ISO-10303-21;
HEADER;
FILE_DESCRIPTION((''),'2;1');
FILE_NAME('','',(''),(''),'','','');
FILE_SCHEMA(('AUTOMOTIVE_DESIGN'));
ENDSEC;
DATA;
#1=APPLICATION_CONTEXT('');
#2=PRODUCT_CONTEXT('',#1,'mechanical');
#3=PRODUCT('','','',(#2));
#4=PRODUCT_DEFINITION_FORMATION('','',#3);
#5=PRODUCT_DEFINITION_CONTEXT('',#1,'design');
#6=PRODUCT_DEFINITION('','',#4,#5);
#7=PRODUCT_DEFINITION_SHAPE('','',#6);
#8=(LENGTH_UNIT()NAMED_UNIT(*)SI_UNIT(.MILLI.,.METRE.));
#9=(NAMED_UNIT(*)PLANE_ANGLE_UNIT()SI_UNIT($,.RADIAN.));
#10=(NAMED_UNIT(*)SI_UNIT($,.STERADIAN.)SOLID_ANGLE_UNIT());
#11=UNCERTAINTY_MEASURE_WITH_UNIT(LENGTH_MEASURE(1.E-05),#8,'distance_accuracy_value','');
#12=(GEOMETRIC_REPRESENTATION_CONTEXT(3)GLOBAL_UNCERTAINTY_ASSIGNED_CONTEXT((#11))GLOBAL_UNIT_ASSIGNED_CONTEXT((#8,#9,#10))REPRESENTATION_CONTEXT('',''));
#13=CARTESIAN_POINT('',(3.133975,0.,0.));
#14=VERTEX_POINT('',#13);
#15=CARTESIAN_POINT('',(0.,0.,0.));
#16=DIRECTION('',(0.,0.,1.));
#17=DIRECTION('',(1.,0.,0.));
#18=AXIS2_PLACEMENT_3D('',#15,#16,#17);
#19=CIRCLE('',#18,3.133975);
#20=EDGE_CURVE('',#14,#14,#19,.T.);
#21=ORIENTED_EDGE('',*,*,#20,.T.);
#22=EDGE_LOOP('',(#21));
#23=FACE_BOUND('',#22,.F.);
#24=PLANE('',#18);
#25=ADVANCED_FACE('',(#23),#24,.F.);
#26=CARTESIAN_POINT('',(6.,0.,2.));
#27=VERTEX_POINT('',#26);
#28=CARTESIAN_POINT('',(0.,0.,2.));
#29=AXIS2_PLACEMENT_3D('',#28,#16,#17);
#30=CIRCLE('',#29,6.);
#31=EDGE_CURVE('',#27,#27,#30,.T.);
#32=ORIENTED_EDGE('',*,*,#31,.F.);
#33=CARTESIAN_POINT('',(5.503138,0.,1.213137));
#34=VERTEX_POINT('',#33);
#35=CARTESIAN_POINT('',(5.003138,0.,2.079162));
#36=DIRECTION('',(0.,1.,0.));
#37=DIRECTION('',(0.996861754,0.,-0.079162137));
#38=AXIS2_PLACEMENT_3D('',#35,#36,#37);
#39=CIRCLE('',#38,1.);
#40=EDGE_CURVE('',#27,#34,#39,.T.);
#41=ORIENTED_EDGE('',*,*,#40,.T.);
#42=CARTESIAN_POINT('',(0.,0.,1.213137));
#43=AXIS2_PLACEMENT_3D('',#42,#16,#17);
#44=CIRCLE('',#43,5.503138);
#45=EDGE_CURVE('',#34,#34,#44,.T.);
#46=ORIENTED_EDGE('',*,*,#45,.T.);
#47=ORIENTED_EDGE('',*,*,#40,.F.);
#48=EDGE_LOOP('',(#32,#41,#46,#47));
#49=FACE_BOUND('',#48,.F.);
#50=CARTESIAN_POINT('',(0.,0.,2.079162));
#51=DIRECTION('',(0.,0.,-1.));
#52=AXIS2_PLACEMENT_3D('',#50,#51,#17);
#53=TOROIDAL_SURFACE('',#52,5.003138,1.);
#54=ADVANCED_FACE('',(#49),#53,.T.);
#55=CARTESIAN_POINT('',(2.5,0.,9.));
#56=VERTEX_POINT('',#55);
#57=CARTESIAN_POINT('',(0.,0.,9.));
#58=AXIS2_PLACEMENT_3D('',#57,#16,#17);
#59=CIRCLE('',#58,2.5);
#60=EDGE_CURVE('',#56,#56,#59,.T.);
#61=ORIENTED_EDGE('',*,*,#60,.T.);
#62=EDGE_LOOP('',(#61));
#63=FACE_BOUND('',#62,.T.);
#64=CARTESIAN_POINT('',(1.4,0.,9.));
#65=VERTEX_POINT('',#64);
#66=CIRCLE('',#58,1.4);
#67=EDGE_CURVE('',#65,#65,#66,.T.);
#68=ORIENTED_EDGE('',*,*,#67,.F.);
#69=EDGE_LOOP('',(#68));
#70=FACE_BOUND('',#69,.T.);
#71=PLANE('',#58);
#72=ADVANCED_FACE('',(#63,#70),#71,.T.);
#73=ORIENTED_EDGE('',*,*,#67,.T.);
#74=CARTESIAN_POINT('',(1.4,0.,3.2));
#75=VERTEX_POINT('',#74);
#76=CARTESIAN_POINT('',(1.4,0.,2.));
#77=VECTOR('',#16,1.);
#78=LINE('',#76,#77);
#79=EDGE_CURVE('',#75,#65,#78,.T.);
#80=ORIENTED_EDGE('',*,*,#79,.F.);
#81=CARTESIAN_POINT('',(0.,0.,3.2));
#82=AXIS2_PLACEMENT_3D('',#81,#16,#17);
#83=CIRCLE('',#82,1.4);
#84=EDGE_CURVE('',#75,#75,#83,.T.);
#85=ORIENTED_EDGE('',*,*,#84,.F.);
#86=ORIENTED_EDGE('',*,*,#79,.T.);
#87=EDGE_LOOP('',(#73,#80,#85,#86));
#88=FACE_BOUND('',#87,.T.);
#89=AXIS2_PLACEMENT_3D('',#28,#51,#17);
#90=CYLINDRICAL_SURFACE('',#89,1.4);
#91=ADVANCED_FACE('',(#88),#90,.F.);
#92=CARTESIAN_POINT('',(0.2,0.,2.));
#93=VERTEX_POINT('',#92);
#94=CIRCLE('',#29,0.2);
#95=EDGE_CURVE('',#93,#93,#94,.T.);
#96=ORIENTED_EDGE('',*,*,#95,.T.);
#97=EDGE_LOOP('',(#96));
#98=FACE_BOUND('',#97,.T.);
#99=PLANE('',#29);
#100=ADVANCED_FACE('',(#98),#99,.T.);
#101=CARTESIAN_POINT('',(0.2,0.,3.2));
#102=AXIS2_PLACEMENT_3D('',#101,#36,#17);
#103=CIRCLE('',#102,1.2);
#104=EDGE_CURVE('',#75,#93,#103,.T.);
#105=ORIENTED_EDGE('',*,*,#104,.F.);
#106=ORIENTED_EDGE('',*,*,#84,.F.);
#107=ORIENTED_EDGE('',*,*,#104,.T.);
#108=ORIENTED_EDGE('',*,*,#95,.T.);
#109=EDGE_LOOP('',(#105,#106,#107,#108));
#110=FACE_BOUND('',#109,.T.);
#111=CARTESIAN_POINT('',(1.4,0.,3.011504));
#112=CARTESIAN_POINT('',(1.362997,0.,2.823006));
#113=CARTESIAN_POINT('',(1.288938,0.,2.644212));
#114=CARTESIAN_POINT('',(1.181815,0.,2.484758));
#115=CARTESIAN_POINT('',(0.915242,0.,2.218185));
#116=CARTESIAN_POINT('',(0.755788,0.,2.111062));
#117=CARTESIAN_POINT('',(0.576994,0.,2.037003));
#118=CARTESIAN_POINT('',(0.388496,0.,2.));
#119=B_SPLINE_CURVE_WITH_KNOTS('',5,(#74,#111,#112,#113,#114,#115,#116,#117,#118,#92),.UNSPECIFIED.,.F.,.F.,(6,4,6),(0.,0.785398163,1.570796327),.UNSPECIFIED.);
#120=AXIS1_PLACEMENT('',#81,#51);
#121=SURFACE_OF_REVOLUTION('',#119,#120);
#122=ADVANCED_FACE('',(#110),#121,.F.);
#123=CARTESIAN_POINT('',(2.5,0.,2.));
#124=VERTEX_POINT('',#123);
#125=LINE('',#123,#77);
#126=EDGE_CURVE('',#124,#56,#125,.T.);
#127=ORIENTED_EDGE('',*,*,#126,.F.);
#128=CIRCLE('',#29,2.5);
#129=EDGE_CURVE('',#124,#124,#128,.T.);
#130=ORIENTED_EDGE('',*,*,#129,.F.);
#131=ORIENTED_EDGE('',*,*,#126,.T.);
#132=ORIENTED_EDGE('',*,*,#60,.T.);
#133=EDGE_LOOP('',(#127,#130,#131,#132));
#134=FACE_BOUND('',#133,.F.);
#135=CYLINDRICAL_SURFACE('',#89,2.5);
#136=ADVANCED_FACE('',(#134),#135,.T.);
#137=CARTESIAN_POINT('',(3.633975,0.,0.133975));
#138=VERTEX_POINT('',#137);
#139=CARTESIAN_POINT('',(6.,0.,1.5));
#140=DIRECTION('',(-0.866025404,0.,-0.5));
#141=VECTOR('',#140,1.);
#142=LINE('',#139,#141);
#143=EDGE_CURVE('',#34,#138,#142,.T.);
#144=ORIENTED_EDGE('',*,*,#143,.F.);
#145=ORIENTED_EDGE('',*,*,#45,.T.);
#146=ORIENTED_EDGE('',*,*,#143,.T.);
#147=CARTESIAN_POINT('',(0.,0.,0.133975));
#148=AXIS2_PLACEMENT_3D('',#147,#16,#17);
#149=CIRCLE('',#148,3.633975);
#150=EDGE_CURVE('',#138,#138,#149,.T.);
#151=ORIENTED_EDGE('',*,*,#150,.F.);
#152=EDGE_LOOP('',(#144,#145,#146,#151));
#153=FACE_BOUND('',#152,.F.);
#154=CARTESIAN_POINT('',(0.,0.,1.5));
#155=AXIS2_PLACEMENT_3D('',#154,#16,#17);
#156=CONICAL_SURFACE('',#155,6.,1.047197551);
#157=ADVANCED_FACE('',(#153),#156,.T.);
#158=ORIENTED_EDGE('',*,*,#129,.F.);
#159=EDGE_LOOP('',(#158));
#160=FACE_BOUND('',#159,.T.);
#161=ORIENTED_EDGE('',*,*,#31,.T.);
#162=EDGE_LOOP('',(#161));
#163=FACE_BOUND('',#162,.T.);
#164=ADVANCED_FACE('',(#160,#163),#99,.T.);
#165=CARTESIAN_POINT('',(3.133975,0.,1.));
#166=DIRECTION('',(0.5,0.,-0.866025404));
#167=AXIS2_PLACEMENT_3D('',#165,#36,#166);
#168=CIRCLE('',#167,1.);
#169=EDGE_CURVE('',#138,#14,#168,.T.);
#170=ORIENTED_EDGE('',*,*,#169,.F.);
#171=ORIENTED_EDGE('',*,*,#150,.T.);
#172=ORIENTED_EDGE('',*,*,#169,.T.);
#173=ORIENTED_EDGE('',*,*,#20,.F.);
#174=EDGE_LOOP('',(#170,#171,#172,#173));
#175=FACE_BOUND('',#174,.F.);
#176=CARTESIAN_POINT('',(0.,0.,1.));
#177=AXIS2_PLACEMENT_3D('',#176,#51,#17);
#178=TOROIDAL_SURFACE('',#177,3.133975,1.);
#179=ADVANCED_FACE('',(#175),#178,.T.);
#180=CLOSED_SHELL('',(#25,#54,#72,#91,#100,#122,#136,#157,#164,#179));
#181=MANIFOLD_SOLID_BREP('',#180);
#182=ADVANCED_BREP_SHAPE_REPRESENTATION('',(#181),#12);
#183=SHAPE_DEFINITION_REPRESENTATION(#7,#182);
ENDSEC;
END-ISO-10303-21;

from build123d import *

# Parameters (mm, degrees)
F0_R     = 6
F1_DEPTH = 2
F2_SIZE2 = 2.5980762114
F2_SIZE  = 1.5
F4_R     = 2.5
F4_R_2   = 1.4
F5_DEPTH = 7
F6_R     = 1.2


# Not quite as in the source:
# - a fillet or chamfer that OpenCascade refuses, or shapes differently, is made with other operations: its cross-section is extruded or revolved along the edge and cut away or added


with BuildPart() as f1:
    # F0 (on Top) → F1 (new body)
    with BuildSketch(Plane.XY):
        Circle(F0_R)
    extrude(amount=F1_DEPTH)

    # F2
    f2_edges = [f1.edges().sort_by_distance(p)[0] for p in [
        (-6, 0, 0),
    ]]
    f2_side = f1.faces().sort_by_distance((-6, 0, 1))[0]
    chamfer(f2_edges, length=F2_SIZE, length2=F2_SIZE2, reference=f2_side)

    # F3: fillet of radius 1 on 2 edges, made by hand

    # F3_s1 → F3_t2 (revolve, cut)
    with BuildSketch(Plane.XZ):
        with BuildLine():
            ThreePointArc((3.6339745962, 0.1339745962), (3.3927936413, 0.0340741737), (3.1339745962, 0))
            Line((3.1339745962, 0), (3.4019237886, 0))
            Line((3.4019237886, 0), (3.6339745962, 0.1339745962))
        make_face()
    revolve(axis=Axis((0, 0, 0), (0, 0, 1)), mode=Mode.SUBTRACT)

    # F3_s3 → F3_t4 (revolve, cut)
    with BuildSketch(Plane.XZ):
        with BuildLine():
            ThreePointArc((6, 2), (5.8486778537, 1.5452494356), (5.5031382462, 1.2131367327))
            Line((5.5031382462, 1.2131367327), (6, 1.5))
            Line((6, 1.5), (6, 2))
        make_face()
    revolve(axis=Axis((0, 0, 1.5), (0, 0, 1)), mode=Mode.SUBTRACT)

    # F4 (on face) → F5 (join)
    with BuildSketch(Plane.XY.offset(2)):
        Circle(F4_R)
        Circle(F4_R_2, mode=Mode.SUBTRACT)
    extrude(amount=F5_DEPTH)

    # F6
    f6_edges = [f1.edges().sort_by_distance(p)[0] for p in [
        (-1.4, 0, 2),
    ]]
    fillet(f6_edges, radius=F6_R)


solid = f1.part
